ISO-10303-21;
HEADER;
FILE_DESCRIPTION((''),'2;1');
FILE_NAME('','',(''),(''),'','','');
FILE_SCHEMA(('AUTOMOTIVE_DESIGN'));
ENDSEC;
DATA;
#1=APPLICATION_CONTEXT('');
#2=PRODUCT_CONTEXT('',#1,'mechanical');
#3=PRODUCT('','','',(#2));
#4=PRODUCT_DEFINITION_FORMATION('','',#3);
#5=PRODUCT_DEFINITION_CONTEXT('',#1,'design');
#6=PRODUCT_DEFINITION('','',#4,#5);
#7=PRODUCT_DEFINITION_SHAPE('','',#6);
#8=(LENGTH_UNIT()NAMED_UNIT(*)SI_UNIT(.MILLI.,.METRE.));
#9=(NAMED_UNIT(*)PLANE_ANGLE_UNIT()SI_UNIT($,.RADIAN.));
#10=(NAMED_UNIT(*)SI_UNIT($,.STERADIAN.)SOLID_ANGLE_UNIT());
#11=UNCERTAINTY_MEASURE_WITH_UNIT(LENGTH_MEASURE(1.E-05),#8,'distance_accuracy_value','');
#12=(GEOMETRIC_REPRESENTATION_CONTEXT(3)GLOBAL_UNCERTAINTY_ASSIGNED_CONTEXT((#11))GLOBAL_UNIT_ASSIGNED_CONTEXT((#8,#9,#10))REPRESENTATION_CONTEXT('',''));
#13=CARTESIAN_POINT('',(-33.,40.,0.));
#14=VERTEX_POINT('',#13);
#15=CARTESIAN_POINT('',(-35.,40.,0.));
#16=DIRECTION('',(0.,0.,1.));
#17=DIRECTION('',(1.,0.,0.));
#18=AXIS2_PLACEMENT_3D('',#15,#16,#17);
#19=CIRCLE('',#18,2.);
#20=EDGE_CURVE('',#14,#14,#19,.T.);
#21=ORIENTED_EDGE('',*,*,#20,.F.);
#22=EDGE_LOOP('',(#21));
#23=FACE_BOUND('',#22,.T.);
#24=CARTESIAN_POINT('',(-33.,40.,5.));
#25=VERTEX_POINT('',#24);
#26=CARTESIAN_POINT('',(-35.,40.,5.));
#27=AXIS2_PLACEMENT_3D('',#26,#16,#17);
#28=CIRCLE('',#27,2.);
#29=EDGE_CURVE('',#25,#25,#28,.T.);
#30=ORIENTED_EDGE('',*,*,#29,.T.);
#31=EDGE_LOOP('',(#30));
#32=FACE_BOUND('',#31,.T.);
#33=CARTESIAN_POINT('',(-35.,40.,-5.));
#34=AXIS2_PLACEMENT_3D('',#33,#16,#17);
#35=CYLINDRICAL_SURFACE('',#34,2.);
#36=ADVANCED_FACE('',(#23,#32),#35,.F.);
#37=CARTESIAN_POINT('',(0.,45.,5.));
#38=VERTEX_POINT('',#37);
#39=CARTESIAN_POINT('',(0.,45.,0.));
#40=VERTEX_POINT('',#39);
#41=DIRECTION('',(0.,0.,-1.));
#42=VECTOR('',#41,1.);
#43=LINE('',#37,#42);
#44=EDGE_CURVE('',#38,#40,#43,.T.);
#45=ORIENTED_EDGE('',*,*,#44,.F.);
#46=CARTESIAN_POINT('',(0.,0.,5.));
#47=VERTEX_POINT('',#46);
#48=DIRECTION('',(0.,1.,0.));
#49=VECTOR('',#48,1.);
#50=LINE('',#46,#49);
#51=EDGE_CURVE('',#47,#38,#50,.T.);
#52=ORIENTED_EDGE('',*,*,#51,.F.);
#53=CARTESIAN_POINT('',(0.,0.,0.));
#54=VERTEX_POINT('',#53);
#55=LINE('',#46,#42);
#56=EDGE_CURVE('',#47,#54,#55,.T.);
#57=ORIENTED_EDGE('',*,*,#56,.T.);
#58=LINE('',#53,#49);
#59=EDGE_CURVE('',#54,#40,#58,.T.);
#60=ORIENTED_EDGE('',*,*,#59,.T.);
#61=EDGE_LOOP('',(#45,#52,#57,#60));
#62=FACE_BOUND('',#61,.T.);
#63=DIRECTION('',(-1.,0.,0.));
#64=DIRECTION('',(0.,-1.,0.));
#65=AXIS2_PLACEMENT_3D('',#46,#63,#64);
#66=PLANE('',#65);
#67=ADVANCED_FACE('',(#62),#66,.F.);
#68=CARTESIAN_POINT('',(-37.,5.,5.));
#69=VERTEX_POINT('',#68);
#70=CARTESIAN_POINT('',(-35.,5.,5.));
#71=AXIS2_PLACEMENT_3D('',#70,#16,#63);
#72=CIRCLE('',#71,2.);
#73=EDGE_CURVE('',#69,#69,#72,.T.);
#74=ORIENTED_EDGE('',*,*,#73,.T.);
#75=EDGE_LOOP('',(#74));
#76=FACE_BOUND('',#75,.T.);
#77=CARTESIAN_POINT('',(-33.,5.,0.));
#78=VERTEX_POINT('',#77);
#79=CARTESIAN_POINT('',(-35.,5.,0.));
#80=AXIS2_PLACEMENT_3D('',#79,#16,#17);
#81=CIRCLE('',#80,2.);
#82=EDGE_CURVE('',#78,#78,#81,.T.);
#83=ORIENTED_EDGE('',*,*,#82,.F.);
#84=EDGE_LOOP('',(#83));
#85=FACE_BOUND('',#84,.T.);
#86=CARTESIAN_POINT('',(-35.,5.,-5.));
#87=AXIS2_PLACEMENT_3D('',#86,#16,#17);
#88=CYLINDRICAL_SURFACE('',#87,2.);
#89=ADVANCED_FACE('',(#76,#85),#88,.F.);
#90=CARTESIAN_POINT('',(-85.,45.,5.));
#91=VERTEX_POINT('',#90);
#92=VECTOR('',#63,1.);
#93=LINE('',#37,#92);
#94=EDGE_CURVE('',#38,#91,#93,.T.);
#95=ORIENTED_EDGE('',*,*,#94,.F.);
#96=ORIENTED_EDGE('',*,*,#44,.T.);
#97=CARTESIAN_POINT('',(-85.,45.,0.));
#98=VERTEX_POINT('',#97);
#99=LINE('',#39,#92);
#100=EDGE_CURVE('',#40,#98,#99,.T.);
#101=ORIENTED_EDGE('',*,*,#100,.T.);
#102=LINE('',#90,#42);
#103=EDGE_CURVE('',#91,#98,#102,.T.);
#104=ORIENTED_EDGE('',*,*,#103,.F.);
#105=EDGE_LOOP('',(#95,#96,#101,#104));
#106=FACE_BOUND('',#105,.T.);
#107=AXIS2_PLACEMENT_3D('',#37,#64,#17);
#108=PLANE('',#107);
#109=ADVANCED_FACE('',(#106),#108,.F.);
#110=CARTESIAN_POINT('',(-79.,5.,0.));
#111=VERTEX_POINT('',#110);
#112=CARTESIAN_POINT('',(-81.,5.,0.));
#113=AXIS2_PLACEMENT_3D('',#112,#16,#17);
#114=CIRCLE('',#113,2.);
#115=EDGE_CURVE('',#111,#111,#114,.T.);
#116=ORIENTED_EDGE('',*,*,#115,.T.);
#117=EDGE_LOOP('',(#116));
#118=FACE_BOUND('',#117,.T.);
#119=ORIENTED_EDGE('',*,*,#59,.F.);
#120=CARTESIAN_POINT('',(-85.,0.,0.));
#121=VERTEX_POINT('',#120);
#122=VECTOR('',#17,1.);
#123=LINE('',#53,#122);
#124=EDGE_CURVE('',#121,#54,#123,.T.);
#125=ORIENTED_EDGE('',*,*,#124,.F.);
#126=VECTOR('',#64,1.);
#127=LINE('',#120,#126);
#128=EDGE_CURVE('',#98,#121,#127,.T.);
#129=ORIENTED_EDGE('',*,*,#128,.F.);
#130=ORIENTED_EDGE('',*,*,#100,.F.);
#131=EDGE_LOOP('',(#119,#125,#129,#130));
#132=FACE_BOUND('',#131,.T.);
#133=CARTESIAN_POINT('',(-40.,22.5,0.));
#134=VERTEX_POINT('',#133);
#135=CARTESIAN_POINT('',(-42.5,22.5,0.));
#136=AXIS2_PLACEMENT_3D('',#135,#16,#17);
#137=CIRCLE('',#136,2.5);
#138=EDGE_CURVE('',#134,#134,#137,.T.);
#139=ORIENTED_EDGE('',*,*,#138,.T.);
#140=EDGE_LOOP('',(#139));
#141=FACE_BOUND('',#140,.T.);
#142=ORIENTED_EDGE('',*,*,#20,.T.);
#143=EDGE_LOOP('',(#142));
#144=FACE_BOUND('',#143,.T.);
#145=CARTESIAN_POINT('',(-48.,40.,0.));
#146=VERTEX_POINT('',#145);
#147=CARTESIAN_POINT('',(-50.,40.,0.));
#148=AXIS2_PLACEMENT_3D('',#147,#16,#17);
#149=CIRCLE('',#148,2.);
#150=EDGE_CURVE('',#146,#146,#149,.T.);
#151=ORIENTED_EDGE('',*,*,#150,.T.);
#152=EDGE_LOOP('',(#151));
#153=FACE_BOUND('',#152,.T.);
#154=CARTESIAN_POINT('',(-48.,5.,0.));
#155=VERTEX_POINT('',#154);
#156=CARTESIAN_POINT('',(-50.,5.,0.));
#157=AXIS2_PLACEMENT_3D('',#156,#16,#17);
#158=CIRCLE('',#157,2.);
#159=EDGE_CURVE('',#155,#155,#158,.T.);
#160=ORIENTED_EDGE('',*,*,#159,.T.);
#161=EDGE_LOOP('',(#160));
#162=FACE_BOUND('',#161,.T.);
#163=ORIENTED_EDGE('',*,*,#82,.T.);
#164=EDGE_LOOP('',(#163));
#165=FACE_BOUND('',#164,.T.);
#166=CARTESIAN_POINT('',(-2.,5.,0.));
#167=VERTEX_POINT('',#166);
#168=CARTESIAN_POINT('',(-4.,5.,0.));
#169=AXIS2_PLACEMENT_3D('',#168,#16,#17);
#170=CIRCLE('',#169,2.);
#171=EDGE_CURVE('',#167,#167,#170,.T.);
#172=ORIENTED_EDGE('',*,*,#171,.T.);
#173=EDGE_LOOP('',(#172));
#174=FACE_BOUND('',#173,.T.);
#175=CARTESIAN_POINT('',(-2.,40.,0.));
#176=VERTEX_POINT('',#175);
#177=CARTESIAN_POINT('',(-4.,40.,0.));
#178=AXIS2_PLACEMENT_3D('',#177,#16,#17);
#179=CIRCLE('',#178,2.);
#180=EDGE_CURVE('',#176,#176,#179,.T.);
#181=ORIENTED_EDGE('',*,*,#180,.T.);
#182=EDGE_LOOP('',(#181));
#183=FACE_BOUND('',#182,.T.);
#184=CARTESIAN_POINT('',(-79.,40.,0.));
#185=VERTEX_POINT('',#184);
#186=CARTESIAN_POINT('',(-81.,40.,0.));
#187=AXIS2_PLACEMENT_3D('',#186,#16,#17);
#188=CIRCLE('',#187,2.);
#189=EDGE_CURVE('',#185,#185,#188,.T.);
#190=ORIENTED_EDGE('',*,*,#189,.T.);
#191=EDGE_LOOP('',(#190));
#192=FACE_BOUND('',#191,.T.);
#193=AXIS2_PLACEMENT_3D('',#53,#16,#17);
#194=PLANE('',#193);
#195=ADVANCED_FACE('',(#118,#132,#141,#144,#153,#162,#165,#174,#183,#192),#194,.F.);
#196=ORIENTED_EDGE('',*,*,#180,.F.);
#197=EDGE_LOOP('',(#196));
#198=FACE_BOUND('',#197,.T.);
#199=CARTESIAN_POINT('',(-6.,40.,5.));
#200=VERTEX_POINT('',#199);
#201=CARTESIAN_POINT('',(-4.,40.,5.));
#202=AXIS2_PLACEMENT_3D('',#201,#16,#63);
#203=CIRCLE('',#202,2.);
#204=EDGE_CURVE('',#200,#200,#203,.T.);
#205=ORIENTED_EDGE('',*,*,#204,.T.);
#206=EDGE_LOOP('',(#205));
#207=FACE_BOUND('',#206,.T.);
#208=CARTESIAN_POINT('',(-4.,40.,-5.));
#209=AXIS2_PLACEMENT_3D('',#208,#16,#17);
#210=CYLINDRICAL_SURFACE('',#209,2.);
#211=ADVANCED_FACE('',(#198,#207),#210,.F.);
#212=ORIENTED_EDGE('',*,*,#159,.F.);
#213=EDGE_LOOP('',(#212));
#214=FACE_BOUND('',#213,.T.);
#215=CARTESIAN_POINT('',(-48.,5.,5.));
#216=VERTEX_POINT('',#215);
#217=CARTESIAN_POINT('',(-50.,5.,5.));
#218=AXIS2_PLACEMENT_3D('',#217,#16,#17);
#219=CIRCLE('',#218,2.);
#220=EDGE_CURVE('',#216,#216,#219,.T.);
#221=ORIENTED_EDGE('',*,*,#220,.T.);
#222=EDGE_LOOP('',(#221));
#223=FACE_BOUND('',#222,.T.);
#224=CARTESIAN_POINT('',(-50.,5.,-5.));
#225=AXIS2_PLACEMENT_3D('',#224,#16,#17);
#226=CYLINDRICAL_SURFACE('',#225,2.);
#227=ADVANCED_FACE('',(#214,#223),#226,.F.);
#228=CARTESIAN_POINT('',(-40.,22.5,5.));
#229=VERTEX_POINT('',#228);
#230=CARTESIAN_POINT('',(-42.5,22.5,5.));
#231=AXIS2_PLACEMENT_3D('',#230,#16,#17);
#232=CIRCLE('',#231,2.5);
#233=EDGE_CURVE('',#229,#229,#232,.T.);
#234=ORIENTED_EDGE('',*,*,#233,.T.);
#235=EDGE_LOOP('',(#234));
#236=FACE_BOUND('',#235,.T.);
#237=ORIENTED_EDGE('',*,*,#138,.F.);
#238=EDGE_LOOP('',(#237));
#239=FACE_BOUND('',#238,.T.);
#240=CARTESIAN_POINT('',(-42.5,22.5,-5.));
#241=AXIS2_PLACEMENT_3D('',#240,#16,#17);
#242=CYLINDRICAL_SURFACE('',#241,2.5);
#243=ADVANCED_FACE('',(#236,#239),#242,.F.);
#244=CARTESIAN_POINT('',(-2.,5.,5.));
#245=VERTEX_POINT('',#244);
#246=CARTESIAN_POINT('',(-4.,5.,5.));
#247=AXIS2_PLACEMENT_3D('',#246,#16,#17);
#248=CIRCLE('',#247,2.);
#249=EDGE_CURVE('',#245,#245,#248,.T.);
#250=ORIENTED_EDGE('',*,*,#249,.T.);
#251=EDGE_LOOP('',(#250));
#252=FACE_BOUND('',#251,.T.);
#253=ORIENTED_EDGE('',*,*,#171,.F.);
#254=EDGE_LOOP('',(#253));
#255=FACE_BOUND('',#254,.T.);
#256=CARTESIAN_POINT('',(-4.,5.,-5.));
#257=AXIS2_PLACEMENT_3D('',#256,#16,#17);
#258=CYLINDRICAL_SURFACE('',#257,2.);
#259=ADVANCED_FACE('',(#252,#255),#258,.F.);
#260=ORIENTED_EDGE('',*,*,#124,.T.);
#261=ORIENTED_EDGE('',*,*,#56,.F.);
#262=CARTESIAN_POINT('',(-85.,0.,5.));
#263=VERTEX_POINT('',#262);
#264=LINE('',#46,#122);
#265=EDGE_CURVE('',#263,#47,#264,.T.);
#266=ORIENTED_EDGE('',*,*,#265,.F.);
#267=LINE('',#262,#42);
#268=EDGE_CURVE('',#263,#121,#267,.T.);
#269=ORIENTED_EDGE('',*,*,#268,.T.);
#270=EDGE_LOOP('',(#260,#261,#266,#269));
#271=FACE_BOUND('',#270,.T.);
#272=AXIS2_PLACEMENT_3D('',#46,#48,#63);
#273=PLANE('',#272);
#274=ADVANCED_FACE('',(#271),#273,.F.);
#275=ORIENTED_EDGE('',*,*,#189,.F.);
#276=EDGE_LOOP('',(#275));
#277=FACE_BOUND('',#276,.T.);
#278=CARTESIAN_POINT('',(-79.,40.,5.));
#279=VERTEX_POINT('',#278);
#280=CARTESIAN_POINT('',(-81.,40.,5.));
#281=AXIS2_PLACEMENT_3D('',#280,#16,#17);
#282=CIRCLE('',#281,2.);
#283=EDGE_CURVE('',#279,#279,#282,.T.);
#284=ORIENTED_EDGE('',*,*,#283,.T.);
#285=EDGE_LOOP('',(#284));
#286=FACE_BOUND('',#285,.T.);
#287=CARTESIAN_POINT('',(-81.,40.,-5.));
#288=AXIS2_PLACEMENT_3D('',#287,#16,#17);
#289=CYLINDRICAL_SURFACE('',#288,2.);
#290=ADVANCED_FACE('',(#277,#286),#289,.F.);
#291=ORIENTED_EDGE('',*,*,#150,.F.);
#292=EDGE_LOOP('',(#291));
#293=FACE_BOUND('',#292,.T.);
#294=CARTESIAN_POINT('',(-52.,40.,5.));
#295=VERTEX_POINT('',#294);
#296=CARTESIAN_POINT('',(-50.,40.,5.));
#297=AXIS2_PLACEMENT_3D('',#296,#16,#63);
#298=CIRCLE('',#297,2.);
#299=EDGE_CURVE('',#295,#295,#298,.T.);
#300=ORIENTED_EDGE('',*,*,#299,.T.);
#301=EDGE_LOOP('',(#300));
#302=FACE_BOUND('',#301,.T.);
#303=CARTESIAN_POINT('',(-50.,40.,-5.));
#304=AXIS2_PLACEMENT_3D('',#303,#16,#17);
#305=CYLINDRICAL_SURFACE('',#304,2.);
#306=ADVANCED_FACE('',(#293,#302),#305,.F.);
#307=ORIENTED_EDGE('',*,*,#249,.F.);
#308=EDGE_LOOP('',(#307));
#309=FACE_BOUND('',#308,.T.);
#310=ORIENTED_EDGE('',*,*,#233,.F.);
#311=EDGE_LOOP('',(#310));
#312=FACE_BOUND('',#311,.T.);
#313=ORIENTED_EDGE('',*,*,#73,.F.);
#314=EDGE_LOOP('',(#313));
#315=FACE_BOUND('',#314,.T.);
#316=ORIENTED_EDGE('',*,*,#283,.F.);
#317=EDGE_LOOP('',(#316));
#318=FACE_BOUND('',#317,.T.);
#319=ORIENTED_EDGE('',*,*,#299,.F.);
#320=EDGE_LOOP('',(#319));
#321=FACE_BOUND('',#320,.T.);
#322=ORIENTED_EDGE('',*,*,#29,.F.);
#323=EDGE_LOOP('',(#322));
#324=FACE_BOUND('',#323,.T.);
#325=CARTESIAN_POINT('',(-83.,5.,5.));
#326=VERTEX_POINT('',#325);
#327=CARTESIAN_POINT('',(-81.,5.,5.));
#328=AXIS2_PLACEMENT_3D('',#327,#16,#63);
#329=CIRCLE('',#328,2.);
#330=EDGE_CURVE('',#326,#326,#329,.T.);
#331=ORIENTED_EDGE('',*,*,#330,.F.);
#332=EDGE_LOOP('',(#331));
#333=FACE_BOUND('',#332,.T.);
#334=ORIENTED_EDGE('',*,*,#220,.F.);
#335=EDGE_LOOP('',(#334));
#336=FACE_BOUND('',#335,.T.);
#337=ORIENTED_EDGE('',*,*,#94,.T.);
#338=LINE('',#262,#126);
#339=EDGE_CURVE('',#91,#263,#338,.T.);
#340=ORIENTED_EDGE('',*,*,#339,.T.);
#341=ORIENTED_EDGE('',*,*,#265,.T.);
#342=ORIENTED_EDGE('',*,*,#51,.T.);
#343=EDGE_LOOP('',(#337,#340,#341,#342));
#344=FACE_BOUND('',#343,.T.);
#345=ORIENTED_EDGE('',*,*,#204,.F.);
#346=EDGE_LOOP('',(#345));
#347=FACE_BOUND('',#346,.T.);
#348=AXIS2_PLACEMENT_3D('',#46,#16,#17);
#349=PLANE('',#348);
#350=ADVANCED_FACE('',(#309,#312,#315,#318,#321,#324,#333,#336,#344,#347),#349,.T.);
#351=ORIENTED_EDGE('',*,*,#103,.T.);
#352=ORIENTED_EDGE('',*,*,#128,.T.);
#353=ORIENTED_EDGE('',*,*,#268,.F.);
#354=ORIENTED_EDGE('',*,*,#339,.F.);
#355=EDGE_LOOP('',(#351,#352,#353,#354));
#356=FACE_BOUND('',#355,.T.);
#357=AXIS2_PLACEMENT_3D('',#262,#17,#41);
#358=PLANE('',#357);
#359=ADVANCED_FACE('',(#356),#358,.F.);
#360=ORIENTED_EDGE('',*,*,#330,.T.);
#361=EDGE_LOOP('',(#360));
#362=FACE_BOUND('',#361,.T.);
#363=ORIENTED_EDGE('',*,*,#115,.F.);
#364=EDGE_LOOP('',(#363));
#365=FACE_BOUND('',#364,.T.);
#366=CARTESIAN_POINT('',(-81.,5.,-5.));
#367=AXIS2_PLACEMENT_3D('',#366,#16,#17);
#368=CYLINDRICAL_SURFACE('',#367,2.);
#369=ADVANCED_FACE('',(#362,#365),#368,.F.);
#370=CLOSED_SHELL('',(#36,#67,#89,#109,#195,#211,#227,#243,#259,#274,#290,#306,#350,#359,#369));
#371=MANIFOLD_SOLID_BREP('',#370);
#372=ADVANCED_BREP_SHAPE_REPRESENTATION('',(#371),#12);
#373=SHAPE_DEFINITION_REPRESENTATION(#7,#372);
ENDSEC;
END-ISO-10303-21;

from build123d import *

# Parameters (mm, degrees)
SKETCH1_W                = 85
SKETCH1_H                = 45
BOSS_EXTRUDE1_DEPTH      = 5
CUT_EXTRUDE1_OUTLINE_R   = 2
CUT_EXTRUDE1_OUTLINE_R_2 = 2.5
CUT_EXTRUDE1_DEPTH       = 5


# Read off the part's stored shape, not the designer's step: Cut-Extrude1
with BuildPart() as part:
    # Sketch1 → Boss-Extrude1 (new body)
    with BuildSketch(Plane.XY):
        with Locations((-42.5, 22.5)):
            Rectangle(SKETCH1_W, SKETCH1_H)
    extrude(amount=BOSS_EXTRUDE1_DEPTH)

    # Cut-Extrude1 outline → Cut-Extrude1 (cut)
    with BuildSketch(Plane.XY):
        with Locations((-81, 40)):
            Circle(CUT_EXTRUDE1_OUTLINE_R)
        with Locations((-35, 5)):
            Circle(CUT_EXTRUDE1_OUTLINE_R)
        with Locations((-35, 40)):
            Circle(CUT_EXTRUDE1_OUTLINE_R)
        with Locations((-4, 40)):
            Circle(CUT_EXTRUDE1_OUTLINE_R)
        with Locations((-42.5, 22.5)):
            Circle(CUT_EXTRUDE1_OUTLINE_R_2)
        with Locations((-81, 5)):
            Circle(CUT_EXTRUDE1_OUTLINE_R)
        with Locations((-50, 5)):
            Circle(CUT_EXTRUDE1_OUTLINE_R)
        with Locations((-50, 40)):
            Circle(CUT_EXTRUDE1_OUTLINE_R)
        with Locations((-4, 5)):
            Circle(CUT_EXTRUDE1_OUTLINE_R)
    extrude(amount=CUT_EXTRUDE1_DEPTH, mode=Mode.SUBTRACT)


solid = part.part
